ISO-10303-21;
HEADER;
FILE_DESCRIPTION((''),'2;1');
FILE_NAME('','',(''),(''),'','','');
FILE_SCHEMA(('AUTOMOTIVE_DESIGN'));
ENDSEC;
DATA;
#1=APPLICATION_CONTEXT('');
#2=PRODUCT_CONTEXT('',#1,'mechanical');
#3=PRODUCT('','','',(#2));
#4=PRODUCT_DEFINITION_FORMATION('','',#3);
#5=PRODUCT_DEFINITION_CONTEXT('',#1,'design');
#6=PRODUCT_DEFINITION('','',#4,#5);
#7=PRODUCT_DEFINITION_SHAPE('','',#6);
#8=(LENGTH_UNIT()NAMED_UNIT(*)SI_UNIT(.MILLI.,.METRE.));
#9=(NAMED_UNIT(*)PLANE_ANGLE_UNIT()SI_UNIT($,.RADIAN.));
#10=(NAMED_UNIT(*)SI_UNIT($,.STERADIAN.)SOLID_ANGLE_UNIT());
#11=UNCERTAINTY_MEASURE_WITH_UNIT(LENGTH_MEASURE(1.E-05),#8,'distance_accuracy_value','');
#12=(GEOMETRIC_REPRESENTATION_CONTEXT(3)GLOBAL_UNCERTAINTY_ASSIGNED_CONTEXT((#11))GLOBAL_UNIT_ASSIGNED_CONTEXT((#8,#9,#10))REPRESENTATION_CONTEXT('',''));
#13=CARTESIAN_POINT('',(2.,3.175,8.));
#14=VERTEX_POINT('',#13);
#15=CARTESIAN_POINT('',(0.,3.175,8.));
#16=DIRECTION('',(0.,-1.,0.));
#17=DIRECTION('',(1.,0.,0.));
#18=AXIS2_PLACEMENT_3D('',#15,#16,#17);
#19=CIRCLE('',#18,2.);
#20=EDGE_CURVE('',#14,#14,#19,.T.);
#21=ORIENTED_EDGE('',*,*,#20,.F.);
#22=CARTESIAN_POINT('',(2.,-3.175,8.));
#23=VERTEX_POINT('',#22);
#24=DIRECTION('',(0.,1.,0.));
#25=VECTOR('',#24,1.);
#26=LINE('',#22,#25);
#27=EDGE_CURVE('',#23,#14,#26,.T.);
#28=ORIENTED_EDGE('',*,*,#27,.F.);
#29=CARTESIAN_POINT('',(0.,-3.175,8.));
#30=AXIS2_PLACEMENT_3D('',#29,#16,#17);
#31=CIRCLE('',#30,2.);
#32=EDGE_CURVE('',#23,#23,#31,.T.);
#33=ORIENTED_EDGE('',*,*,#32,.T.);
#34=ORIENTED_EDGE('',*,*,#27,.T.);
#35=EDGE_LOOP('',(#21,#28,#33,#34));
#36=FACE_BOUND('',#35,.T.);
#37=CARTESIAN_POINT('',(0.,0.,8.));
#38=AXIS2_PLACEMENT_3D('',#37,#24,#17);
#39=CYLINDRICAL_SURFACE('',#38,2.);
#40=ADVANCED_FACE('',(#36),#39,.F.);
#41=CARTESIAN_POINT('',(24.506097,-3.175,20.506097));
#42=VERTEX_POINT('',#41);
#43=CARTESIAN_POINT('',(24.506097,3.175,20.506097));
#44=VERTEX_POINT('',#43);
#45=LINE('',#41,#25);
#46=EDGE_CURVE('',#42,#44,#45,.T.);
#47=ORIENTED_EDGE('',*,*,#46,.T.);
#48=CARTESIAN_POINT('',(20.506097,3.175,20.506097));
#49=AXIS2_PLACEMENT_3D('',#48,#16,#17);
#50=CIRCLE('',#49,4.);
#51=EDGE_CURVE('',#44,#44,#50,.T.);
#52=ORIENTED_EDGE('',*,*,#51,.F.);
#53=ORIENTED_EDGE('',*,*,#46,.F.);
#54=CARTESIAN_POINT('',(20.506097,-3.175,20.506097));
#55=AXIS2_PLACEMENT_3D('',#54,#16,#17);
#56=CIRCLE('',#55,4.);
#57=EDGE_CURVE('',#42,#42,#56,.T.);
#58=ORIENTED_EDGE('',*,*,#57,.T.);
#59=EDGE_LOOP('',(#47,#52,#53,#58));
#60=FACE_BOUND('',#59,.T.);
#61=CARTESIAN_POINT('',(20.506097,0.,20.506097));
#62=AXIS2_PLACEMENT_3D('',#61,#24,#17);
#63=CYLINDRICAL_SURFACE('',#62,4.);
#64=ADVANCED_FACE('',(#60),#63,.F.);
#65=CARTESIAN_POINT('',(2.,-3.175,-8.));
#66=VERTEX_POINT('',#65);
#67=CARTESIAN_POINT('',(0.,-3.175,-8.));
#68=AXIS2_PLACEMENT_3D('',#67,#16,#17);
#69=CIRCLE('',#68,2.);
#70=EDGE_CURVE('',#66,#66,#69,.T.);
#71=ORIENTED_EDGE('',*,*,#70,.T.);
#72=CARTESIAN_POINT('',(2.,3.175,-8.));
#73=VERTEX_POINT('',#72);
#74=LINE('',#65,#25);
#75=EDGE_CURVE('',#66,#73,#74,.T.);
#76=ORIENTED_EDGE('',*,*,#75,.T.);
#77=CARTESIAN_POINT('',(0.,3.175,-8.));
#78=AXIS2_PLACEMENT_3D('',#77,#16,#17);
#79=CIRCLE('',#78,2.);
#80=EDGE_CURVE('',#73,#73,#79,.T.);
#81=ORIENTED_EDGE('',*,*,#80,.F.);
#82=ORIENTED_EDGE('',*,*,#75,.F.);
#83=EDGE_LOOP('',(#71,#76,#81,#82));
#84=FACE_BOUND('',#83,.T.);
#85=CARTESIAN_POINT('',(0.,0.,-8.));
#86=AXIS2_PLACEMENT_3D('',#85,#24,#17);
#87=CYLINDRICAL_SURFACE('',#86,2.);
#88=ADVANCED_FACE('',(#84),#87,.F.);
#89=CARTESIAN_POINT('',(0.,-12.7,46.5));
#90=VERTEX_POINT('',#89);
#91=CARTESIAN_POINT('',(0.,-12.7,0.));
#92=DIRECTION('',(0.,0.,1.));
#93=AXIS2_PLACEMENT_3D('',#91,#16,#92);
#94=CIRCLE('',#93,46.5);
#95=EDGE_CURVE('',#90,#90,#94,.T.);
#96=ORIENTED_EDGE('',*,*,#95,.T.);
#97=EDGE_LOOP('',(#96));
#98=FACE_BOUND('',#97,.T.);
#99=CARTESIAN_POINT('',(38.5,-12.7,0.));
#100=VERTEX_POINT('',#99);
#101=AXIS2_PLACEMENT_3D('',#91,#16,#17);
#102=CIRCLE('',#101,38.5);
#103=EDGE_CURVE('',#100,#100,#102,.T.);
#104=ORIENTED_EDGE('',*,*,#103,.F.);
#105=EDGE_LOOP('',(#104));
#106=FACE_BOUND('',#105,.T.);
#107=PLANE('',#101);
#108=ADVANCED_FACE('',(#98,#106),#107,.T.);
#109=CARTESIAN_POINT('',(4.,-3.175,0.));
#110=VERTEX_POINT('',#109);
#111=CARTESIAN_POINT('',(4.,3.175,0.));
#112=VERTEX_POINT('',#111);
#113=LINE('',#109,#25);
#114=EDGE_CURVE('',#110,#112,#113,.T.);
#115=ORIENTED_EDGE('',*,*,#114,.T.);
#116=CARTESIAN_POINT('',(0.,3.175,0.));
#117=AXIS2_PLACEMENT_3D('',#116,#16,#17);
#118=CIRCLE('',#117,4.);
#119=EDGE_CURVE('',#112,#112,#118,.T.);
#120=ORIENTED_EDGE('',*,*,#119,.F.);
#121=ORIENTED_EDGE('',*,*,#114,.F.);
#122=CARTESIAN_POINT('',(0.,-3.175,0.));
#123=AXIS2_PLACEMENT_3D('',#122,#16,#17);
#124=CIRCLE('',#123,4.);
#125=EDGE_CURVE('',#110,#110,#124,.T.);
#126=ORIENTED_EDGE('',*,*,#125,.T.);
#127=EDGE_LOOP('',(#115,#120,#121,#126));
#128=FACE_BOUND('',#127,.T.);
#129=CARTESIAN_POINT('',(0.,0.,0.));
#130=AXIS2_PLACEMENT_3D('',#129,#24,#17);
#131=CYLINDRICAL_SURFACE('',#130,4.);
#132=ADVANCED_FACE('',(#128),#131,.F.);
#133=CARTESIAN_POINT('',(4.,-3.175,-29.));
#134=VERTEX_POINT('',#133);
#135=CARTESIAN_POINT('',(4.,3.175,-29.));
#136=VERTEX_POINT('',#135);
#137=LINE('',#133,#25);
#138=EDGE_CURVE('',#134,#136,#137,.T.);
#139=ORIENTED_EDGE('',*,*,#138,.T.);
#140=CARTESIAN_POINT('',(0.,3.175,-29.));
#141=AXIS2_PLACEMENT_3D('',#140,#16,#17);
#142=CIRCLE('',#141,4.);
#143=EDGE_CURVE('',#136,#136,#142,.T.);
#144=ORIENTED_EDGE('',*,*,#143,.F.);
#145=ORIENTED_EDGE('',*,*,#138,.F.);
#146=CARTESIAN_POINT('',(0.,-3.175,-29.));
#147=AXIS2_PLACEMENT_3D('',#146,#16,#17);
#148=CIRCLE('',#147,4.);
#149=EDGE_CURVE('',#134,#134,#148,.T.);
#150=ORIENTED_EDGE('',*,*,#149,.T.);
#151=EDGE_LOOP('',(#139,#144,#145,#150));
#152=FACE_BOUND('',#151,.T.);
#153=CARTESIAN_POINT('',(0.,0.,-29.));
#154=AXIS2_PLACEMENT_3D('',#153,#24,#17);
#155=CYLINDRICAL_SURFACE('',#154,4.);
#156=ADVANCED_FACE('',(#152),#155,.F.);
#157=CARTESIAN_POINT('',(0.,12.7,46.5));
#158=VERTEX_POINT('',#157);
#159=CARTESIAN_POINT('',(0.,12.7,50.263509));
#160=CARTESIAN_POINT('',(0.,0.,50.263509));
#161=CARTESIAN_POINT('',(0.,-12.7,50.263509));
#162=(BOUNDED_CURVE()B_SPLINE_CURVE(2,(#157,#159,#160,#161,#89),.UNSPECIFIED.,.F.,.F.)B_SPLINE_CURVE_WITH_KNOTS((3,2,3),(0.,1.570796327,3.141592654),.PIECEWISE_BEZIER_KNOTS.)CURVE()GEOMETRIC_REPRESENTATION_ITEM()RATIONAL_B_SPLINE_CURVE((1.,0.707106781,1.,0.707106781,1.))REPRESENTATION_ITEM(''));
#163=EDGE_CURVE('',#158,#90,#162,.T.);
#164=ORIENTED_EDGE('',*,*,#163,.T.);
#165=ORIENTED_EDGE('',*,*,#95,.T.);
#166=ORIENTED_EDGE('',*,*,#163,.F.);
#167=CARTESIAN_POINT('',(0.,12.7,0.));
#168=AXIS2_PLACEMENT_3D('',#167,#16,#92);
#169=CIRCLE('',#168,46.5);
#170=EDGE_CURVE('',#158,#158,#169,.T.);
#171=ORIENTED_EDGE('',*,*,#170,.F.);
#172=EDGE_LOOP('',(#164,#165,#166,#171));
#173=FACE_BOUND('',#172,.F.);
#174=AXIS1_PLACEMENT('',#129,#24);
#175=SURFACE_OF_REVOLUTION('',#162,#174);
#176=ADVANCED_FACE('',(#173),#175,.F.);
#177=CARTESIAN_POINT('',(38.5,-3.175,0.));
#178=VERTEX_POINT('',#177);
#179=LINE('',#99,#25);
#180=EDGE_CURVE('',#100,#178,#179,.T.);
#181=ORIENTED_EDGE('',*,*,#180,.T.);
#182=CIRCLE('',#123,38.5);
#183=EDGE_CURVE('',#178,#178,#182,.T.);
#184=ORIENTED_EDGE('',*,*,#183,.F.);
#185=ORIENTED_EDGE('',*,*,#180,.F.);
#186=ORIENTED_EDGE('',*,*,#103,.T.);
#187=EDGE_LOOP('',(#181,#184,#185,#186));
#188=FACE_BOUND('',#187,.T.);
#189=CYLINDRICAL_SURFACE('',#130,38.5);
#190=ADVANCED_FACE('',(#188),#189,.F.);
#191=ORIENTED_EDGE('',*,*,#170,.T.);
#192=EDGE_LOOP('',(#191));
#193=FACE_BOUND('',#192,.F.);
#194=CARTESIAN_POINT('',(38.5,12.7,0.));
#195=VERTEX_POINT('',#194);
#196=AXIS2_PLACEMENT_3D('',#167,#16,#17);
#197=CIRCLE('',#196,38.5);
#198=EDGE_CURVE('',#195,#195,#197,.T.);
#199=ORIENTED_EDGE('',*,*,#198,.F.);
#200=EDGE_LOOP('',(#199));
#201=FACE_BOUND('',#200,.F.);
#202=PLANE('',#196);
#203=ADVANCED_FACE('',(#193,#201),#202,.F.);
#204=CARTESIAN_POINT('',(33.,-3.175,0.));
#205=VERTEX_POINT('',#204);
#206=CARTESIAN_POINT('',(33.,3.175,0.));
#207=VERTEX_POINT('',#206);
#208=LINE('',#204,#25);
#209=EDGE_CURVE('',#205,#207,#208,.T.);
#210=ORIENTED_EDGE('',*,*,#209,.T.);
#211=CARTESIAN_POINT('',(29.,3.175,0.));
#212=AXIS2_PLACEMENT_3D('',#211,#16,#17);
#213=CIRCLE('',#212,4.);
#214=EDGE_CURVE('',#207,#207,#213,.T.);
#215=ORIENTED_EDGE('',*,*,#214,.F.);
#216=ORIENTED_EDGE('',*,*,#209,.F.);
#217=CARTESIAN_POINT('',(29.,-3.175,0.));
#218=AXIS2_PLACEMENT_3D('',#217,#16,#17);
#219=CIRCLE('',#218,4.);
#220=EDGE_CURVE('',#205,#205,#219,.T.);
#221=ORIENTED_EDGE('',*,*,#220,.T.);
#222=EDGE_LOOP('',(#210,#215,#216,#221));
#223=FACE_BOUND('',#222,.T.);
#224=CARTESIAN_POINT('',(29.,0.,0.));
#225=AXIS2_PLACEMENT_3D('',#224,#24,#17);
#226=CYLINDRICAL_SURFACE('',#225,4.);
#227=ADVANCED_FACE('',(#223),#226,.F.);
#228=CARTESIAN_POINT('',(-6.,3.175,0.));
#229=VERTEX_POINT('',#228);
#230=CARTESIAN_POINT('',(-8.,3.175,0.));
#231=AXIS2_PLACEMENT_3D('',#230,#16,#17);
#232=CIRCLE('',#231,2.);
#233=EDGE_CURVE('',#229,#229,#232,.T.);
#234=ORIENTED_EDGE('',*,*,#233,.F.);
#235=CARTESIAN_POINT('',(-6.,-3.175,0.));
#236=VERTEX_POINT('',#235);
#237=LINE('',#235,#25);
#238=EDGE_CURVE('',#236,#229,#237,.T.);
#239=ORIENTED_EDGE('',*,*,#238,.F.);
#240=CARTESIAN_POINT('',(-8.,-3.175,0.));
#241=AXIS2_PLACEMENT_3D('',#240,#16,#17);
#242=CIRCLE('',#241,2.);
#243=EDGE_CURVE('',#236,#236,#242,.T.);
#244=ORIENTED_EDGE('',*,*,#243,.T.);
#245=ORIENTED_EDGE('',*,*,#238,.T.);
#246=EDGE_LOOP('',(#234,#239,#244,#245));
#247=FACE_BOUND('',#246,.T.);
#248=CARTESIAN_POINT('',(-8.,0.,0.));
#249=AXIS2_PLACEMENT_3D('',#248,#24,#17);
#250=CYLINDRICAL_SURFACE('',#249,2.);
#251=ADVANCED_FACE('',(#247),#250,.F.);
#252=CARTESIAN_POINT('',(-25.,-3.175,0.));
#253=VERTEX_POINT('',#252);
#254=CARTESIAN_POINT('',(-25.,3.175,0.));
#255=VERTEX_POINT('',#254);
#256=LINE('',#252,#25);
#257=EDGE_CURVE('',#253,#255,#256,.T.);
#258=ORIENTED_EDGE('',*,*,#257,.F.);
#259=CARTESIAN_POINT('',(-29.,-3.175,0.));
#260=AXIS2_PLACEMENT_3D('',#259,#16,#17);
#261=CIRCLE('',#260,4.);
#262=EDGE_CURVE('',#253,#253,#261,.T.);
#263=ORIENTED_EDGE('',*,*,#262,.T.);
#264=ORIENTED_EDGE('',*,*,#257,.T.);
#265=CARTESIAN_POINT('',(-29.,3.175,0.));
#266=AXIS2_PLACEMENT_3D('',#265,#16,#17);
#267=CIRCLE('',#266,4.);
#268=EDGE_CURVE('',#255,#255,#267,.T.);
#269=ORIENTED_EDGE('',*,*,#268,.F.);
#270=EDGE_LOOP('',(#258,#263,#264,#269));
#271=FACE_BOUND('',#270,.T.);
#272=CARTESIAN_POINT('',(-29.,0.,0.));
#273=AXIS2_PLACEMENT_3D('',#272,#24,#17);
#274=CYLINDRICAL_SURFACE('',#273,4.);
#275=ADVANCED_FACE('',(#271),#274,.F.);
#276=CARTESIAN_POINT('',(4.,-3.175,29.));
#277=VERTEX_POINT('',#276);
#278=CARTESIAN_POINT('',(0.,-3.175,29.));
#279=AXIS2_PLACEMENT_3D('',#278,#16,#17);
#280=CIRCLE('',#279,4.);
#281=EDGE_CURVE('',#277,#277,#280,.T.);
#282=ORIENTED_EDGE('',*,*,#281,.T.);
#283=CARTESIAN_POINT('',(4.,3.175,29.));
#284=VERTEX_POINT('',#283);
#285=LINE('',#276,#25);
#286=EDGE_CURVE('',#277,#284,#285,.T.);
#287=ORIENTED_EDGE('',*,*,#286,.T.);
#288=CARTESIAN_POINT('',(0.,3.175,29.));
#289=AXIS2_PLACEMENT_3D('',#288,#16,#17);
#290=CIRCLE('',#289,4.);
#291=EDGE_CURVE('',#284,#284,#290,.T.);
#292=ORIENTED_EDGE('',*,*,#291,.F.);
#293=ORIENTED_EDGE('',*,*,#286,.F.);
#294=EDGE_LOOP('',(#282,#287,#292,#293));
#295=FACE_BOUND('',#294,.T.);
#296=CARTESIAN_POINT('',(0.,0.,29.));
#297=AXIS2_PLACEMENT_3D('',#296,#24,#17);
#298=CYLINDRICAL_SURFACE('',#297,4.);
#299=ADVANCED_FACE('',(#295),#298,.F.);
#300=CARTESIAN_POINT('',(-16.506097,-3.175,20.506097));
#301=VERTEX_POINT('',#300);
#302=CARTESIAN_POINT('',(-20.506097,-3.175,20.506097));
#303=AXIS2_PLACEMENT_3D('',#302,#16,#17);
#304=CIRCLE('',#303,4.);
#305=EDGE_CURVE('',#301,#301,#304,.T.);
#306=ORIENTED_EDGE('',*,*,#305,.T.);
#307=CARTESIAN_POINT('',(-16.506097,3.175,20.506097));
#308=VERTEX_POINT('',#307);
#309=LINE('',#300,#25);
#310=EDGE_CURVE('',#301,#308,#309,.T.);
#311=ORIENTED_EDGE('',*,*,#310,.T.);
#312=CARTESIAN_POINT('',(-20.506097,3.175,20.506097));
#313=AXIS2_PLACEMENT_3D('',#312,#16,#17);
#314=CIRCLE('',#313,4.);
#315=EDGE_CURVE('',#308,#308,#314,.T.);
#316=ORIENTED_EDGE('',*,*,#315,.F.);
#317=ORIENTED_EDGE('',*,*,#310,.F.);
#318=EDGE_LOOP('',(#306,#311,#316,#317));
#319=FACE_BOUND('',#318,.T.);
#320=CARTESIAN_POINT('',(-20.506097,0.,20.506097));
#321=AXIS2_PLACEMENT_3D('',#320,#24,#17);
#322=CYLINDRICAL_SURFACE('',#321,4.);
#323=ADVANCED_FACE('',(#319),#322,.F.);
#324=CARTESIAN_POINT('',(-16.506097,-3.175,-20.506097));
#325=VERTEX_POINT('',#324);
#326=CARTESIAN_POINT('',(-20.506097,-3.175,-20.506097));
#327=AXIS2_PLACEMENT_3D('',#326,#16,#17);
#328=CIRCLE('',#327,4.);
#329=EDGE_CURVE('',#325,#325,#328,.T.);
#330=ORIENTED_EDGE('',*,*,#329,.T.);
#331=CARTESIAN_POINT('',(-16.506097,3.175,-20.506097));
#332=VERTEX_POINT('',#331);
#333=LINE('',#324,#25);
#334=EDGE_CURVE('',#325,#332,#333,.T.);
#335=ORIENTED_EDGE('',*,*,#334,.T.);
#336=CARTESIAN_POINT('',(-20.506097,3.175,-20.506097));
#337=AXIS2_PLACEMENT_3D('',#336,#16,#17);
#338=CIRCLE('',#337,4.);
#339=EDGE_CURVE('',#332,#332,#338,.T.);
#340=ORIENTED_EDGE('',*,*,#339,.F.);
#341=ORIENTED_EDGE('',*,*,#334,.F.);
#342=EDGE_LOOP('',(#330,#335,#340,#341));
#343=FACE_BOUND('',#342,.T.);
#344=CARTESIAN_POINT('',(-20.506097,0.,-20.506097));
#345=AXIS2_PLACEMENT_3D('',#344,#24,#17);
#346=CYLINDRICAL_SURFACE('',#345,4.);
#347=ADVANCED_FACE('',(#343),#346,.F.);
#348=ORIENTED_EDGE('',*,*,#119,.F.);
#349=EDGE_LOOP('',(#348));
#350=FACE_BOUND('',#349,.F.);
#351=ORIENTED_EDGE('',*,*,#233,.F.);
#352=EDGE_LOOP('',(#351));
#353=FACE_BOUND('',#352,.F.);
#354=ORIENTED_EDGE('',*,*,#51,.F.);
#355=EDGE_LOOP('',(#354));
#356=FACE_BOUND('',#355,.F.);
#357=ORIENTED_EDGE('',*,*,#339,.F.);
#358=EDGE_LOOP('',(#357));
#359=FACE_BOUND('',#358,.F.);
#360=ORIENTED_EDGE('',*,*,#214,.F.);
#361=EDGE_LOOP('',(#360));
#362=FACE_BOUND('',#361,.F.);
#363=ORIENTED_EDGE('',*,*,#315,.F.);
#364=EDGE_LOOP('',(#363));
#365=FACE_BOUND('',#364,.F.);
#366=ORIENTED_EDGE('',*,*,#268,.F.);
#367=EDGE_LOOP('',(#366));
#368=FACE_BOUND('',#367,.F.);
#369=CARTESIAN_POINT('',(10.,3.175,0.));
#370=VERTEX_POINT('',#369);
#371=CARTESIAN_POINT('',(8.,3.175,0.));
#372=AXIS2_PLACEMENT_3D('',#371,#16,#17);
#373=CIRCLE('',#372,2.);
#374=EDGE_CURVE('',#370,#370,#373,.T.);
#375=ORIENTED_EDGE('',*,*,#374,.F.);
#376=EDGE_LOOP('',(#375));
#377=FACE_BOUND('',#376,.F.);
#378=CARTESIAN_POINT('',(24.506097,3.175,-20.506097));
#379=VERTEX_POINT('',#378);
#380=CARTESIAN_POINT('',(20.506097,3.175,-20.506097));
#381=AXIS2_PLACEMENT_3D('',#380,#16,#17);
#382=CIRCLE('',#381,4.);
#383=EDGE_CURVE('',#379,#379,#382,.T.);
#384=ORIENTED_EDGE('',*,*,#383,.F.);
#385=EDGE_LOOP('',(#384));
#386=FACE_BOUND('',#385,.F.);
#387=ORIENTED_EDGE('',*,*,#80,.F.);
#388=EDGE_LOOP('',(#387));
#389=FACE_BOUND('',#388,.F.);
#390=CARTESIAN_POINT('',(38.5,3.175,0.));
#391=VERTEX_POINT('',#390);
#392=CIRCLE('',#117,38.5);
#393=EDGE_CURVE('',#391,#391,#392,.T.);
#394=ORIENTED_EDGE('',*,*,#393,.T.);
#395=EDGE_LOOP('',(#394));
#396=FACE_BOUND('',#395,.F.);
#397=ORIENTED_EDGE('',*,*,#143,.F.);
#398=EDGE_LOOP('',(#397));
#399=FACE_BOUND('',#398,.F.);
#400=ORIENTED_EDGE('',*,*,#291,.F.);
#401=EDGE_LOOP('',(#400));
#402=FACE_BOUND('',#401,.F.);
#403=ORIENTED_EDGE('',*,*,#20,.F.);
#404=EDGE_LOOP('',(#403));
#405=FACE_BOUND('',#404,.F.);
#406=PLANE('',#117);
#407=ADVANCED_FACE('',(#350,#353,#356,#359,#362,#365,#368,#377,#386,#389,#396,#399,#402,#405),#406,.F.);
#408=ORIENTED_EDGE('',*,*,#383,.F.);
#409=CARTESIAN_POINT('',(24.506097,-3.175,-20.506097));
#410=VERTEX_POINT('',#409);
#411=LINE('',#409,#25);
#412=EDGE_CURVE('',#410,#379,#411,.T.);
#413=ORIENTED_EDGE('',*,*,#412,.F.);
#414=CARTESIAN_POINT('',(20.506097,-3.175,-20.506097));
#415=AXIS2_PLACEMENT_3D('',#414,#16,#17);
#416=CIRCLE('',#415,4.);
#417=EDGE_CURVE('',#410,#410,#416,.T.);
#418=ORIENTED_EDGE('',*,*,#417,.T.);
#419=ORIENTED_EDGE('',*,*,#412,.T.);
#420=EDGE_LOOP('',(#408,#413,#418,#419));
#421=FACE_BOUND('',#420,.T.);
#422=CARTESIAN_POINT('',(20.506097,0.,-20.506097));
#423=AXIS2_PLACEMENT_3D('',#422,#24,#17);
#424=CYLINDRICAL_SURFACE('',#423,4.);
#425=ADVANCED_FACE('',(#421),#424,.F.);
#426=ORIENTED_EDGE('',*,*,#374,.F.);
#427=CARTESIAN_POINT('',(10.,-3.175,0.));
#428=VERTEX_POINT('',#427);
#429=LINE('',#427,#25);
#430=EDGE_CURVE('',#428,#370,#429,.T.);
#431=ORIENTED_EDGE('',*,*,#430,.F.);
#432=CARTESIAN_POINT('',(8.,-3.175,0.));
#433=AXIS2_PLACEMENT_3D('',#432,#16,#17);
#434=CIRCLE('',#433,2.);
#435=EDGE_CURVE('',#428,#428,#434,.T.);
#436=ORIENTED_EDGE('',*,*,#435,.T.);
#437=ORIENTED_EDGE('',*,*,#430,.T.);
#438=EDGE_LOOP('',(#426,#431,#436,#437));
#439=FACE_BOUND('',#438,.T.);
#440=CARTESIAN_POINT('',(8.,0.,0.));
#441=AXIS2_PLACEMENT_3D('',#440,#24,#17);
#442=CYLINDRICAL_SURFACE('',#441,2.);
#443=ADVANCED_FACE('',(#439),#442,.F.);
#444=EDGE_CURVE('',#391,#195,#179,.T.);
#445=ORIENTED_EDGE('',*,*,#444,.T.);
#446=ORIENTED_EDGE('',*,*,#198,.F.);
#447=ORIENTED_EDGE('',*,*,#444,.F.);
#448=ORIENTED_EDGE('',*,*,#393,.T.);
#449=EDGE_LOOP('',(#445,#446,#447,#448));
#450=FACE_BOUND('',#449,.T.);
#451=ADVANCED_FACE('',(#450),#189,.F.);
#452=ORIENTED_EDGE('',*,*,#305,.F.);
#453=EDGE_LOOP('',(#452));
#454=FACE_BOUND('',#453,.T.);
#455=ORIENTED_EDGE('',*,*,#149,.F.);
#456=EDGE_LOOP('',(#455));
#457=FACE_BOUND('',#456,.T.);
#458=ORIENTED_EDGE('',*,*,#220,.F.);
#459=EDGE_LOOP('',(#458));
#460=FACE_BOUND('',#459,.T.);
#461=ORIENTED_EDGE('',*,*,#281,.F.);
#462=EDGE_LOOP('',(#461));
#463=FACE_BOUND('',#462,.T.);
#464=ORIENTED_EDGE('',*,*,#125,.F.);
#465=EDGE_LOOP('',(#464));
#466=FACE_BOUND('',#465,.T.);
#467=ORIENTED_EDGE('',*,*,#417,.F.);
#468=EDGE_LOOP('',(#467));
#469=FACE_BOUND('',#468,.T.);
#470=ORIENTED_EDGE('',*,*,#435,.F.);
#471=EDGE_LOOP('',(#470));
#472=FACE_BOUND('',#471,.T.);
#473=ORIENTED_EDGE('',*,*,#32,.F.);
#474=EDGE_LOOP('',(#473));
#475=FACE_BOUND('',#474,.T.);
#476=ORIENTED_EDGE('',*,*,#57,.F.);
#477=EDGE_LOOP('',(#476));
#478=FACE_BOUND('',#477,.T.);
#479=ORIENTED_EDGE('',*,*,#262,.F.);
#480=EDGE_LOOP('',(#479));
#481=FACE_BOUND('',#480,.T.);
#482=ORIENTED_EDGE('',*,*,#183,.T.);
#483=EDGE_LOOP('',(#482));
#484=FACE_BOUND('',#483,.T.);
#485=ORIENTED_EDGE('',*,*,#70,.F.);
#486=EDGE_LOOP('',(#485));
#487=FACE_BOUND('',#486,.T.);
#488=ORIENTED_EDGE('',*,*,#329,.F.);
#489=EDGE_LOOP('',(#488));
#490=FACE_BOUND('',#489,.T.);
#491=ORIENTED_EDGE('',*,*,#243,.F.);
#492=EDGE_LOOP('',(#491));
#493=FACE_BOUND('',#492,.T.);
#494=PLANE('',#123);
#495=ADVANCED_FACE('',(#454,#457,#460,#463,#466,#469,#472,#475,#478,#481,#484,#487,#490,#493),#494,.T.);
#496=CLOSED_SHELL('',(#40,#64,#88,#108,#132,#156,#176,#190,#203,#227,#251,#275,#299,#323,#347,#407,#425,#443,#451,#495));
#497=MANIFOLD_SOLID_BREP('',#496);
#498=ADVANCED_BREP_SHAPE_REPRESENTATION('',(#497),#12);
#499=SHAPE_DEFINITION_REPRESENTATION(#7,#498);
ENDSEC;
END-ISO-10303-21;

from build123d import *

# Parameters (mm, degrees)
F2_R     = 46.5
F2_R_2   = 38.5
F3_DEPTH = 12.7
F2_R_3   = 4
F2_R_4   = 2
F4_DEPTH = 3.175


# Not quite as in the source:
# - a length typed as a fraction of an inch, garbled in the dataset ("3 / 203.2 mm" for 3/8 in), is restored


with BuildPart() as f1:
    # F0 (on Right) → F1 (revolve)
    with BuildSketch(Plane.YZ):
        with BuildLine():
            Line((-12.7, 46.5), (12.7, 46.5))
            add(Edge.make_bspline(
                [(12.7, 46.5), (12.7, 50.2635093224), (0, 50.2635093224), (-12.7, 50.2635093224), (-12.7, 46.5)],
                knots=[0, 0, 0, 1.5707963268, 1.5707963268, 3.1415926536, 3.1415926536, 3.1415926536], degree=2, weights=[1, 0.7071067812, 1, 0.7071067812, 1]))
        make_face()
    revolve(axis=Axis((0, 0, 0), (0, 1, 0)))

    # F2 (on Front) → F3 (join, symmetric)
    with BuildSketch(Plane.XZ):
        Circle(F2_R)
        Circle(F2_R_2, mode=Mode.SUBTRACT)
    extrude(amount=F3_DEPTH, both=True)

    # F2 (on Front) → F4 (join, symmetric)
    with BuildSketch(Plane.XZ):
        Circle(F2_R_2)
        with Locations((-20.5060966544, -20.5060966544)):
            Circle(F2_R_3, mode=Mode.SUBTRACT)
        with Locations((0, -29)):
            Circle(F2_R_3, mode=Mode.SUBTRACT)
        with Locations((20.5060966544, -20.5060966544)):
            Circle(F2_R_3, mode=Mode.SUBTRACT)
        with Locations((0, -8)):
            Circle(F2_R_4, mode=Mode.SUBTRACT)
        with Locations((-29, 0)):
            Circle(F2_R_3, mode=Mode.SUBTRACT)
        with Locations((-8, 0)):
            Circle(F2_R_4, mode=Mode.SUBTRACT)
        with Locations((-20.5060966544, 20.5060966544)):
            Circle(F2_R_3, mode=Mode.SUBTRACT)
        Circle(F2_R_3, mode=Mode.SUBTRACT)
        with Locations((8, 0)):
            Circle(F2_R_4, mode=Mode.SUBTRACT)
        with Locations((0, 8)):
            Circle(F2_R_4, mode=Mode.SUBTRACT)
        with Locations((20.5060966544, 20.5060966544)):
            Circle(F2_R_3, mode=Mode.SUBTRACT)
        with Locations((29, 0)):
            Circle(F2_R_3, mode=Mode.SUBTRACT)
        with Locations((0, 29)):
            Circle(F2_R_3, mode=Mode.SUBTRACT)
    extrude(amount=F4_DEPTH, both=True)


solid = f1.part
